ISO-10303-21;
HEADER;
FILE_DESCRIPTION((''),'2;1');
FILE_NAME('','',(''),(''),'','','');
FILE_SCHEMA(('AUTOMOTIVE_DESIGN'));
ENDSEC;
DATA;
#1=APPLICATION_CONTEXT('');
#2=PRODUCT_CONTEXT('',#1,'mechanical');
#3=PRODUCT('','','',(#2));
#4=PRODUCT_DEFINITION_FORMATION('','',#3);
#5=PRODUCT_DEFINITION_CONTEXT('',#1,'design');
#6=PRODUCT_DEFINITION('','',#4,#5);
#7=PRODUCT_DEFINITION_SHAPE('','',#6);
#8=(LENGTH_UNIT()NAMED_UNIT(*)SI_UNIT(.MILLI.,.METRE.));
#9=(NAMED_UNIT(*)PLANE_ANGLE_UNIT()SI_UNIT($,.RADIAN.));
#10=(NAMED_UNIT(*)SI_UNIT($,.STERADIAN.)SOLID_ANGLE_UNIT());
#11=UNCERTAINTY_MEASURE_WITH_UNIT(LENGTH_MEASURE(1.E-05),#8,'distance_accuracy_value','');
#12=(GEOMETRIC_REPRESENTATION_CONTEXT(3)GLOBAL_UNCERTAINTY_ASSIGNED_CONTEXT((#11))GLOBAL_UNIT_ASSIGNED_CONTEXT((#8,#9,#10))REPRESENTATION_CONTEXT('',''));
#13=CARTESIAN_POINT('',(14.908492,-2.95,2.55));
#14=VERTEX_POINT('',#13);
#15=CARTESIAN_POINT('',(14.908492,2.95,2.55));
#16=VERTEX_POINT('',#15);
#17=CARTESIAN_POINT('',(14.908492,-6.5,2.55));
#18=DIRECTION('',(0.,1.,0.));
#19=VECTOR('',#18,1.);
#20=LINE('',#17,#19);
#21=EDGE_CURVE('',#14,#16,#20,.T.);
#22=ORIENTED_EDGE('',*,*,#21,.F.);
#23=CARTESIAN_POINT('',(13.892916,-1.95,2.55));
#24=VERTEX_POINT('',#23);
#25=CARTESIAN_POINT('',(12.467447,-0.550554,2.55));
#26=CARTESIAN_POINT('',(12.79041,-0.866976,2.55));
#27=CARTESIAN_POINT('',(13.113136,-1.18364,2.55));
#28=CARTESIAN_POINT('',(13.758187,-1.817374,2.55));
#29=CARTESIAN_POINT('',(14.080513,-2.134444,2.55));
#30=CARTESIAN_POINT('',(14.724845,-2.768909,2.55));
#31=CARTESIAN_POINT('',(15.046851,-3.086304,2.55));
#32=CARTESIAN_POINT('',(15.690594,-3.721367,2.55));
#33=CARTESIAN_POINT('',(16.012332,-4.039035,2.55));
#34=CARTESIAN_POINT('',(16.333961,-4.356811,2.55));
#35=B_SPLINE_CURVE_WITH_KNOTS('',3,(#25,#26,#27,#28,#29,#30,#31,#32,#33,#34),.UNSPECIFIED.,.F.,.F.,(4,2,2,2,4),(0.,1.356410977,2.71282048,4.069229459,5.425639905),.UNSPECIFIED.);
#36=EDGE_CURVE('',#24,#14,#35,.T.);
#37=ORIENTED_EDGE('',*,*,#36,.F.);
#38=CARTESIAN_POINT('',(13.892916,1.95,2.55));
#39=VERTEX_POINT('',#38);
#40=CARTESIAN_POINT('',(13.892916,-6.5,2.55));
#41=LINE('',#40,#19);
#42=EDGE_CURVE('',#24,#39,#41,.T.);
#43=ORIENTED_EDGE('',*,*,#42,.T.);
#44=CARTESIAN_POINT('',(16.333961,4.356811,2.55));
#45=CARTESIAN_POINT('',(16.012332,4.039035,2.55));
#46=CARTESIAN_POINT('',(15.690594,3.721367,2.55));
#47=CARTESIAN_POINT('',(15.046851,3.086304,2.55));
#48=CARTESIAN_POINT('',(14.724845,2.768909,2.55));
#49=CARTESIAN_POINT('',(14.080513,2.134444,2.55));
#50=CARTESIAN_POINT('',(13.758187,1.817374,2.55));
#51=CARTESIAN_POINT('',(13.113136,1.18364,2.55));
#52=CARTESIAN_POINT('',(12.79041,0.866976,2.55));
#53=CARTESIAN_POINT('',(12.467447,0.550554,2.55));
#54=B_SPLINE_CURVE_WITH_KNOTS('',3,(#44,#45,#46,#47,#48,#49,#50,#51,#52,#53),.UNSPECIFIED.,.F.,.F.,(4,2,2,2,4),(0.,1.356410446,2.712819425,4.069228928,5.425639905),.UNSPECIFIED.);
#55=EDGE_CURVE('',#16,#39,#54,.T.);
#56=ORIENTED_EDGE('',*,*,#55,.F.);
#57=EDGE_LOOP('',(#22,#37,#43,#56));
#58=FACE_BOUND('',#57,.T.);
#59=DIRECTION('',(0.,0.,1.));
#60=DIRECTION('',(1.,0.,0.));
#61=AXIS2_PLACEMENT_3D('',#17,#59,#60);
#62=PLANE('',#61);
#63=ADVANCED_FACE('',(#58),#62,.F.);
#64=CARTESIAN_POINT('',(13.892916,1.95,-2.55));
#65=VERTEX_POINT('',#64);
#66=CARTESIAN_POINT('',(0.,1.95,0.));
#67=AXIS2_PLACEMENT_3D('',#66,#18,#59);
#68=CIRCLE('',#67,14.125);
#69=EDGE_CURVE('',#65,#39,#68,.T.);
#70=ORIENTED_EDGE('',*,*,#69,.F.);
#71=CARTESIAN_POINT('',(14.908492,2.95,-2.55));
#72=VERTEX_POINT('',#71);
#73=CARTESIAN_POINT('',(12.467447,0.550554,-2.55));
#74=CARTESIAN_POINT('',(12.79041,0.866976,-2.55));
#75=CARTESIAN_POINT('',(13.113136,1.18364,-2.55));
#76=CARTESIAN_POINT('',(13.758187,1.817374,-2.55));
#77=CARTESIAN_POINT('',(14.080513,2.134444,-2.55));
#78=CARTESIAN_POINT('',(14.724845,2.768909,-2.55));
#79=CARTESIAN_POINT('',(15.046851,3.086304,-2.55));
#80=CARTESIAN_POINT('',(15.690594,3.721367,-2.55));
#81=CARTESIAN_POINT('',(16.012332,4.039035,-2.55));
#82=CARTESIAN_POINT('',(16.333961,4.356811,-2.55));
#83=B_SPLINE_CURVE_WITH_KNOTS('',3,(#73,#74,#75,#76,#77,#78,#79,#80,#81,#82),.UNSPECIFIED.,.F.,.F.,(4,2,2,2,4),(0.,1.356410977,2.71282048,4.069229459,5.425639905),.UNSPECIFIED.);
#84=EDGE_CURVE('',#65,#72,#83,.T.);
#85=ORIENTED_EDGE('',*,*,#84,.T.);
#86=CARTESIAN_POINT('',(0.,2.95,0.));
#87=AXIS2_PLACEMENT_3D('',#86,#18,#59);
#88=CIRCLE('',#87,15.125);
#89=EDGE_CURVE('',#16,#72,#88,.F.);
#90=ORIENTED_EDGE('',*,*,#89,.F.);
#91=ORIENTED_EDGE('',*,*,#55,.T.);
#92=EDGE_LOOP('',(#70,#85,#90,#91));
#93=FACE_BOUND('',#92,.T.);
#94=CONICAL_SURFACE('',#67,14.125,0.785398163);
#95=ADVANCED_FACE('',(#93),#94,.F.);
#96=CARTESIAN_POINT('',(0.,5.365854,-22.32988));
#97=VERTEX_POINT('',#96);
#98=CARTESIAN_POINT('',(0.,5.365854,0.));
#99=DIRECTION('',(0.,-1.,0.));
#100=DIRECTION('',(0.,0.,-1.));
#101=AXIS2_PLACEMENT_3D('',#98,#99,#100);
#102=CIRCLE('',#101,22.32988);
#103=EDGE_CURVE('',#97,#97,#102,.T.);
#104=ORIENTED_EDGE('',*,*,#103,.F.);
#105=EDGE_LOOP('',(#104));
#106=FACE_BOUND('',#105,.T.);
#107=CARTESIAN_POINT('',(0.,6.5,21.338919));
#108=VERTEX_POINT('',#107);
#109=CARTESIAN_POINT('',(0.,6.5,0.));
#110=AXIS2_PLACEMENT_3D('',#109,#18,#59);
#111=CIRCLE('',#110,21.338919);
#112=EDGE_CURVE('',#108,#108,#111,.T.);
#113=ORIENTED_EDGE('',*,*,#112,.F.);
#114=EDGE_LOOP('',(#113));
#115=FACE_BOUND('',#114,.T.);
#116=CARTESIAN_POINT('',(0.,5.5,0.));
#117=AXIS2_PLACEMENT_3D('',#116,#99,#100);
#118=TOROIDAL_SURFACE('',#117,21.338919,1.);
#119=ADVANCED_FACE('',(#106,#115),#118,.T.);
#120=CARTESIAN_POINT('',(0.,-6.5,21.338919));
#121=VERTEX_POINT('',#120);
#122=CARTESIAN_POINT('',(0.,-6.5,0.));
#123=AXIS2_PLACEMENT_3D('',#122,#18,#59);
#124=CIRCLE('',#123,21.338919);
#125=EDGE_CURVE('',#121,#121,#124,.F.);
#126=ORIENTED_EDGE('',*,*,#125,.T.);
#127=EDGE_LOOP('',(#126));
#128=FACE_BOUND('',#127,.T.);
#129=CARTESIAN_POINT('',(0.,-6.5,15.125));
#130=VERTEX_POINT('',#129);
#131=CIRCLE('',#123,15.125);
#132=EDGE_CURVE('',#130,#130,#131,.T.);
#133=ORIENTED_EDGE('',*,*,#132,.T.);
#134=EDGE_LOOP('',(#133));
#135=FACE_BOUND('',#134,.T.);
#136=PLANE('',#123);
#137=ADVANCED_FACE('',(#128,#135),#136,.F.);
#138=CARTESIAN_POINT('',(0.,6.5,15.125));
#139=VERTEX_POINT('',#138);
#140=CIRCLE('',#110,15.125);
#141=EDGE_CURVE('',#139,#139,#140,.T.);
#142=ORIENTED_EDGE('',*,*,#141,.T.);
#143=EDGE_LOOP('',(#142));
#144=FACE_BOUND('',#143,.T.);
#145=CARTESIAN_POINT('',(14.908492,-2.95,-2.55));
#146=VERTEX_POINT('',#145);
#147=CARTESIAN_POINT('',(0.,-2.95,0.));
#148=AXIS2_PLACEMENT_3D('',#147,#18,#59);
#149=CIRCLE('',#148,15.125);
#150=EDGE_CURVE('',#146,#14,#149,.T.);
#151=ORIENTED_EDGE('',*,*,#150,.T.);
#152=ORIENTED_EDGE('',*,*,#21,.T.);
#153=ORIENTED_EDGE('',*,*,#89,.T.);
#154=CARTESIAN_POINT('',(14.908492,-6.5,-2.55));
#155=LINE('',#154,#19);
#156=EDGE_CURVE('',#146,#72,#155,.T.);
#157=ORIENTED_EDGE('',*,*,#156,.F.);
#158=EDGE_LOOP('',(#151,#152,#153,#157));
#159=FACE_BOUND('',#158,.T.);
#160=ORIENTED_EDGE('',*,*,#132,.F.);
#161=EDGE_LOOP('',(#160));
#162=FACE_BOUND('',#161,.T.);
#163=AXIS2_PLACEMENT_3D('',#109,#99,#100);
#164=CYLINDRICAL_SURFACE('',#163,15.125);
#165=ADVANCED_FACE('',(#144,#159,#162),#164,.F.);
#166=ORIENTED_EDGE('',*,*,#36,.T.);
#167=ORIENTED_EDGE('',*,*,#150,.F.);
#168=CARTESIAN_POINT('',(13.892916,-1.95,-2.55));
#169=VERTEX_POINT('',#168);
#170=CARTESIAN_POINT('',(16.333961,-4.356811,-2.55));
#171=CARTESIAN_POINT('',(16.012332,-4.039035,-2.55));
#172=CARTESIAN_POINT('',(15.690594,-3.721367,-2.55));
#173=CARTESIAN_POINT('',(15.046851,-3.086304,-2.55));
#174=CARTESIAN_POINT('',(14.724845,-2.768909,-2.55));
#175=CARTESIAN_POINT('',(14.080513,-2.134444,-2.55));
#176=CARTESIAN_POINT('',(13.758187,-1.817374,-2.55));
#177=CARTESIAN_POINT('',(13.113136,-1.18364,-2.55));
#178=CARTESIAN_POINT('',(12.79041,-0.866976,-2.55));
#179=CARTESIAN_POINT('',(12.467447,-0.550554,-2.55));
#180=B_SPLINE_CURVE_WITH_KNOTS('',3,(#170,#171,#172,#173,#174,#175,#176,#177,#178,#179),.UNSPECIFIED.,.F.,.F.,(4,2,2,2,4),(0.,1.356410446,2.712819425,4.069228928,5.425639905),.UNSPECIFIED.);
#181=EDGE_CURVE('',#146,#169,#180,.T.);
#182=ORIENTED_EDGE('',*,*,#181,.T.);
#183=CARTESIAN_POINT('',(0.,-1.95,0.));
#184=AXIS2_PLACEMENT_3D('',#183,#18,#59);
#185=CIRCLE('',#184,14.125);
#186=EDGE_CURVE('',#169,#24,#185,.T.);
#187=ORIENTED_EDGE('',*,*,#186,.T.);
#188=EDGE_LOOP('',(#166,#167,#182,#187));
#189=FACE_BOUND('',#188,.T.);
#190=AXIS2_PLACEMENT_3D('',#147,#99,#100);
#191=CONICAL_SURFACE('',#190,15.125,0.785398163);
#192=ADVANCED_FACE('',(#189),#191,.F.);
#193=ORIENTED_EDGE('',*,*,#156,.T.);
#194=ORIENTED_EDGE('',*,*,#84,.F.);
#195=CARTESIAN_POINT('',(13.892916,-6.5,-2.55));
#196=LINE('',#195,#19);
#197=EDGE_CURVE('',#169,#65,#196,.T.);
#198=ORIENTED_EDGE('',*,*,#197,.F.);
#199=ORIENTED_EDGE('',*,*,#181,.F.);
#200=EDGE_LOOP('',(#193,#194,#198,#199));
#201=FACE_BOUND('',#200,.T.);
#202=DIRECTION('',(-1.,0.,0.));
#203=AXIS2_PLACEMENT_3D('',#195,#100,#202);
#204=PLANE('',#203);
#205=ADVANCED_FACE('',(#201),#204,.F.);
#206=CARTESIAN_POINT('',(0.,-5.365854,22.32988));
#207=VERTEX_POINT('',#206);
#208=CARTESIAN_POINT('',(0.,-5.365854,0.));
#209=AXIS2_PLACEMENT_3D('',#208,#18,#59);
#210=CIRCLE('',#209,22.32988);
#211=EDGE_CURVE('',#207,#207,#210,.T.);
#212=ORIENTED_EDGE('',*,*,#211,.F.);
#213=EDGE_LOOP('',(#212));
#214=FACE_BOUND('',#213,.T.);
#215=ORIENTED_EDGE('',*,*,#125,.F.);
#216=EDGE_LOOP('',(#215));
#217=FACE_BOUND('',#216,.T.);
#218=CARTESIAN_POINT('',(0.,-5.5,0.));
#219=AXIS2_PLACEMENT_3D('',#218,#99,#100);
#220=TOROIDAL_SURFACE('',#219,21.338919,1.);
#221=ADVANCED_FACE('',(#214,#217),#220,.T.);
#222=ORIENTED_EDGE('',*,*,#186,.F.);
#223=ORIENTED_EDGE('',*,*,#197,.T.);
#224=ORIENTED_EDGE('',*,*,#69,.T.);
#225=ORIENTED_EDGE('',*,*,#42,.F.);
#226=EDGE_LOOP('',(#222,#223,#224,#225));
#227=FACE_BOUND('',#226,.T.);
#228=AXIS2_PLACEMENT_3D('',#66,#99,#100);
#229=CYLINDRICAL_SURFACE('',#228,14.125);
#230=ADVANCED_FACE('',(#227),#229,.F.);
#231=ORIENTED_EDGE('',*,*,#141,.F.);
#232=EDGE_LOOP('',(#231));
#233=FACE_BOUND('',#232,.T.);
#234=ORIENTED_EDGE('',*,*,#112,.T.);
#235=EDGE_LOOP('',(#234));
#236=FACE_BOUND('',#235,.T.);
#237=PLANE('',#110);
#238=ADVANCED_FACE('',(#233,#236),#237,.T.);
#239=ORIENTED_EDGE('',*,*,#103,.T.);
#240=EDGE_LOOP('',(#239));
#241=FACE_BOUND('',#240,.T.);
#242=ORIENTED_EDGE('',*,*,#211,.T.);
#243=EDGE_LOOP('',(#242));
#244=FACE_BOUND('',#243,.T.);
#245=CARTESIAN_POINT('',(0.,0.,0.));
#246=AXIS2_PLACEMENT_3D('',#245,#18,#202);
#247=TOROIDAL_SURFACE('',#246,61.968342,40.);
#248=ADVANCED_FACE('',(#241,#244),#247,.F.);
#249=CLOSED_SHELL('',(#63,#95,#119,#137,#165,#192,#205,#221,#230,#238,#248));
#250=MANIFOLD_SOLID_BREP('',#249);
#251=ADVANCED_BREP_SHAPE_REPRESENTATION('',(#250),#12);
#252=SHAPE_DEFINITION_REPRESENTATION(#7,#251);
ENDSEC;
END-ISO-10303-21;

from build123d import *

# Parameters (mm, degrees)
SKETCH1_R               = 22.5
SKETCH1_R_2             = 15.125
BOSS_EXTRUDE1_DEPTH     = 6.5
SKETCH2_R               = 15.125
SKETCH2_R_2             = 14.125
BOSS_EXTRUDE2_DEPTH     = 1.95
CHAMFER1_SIZE           = 1
FILLET1_R               = 1
CUT_EXTRUDE1_DEPTH      = 33.253753798
CUT_EXTRUDE1_DEPTH_BACK = 33.253753798


with BuildPart() as part:
    # Sketch1 → Boss-Extrude1 (new, symmetric)
    with BuildSketch(Plane(origin=(0, 0, 0), x_dir=(1, 0, 0), z_dir=(0, 1, 0))):
        with Locations(Location((0, 0, 0), (0, 0, 90))):
            Circle(SKETCH1_R)
        with Locations(Location((0, 0, 0), (0, 0, 90))):
            Circle(SKETCH1_R_2, mode=Mode.SUBTRACT)
    extrude(amount=BOSS_EXTRUDE1_DEPTH, both=True)

    # Sketch2 → Boss-Extrude2 (add, symmetric)
    with BuildSketch(Plane(origin=(0, 0, 0), x_dir=(1, 0, 0), z_dir=(0, 1, 0))):
        with Locations(Location((0, 0, 0), (0, 0, 90))):
            Circle(SKETCH2_R)
        with Locations(Location((0, 0, 0), (0, 0, 270))):
            Circle(SKETCH2_R_2, mode=Mode.SUBTRACT)
    extrude(amount=BOSS_EXTRUDE2_DEPTH, both=True)

    # Sketch4 → Cut-Revolve2 (revolve, cut)
    with BuildSketch(Plane.XY, mode=Mode.PRIVATE) as cut_revolve2_sk:
        with BuildLine():
            Line((22.5, 6.5), (22.5, -6.5))
            ThreePointArc((22.5, -6.5), (21.968341744, 0), (22.5, 6.5))
        make_face()
    revolve(cut_revolve2_sk.sketch.rotate(Axis((0, 6.5, 0), (0, -1, 0)), 180), axis=Axis((0, 6.5, 0), (0, -1, 0)), mode=Mode.SUBTRACT)

    # Chamfer1
    chamfer1_edges = [part.edges().sort_by_distance(p)[0] for p in [
        (0, 1.95, 15.125),
        (0, -1.95, 15.125),
    ]]
    chamfer(chamfer1_edges, length=CHAMFER1_SIZE - 0.0001)  # a hair under: the kernel refuses the full size

    # Fillet1
    fillet1_edges = [part.edges().sort_by_distance(p)[0] for p in [
        (22.5, 6.5, 0),
        (22.5, -6.5, 0),
    ]]
    fillet(fillet1_edges, radius=FILLET1_R)

    # Sketch5 → Cut-Extrude1 (cut, two sides: drawn at the far end of the back side and taken through both)
    with BuildSketch(Plane(origin=(0, 0, 0), x_dir=(1, 0, 0), z_dir=(0, 1, 0)).offset(-CUT_EXTRUDE1_DEPTH_BACK)):
        with BuildLine():
            Line((13.892916361, 2.55), (14.908491708, 2.55))
            ThreePointArc((14.908491708, 2.55), (15.125, 0), (14.908491708, -2.55))
            Line((14.908491708, -2.55), (13.892916361, -2.55))
            ThreePointArc((13.892916361, -2.55), (14.125, 0), (13.892916361, 2.55))
        make_face()
    extrude(amount=CUT_EXTRUDE1_DEPTH + CUT_EXTRUDE1_DEPTH_BACK, mode=Mode.SUBTRACT)


solid = part.part
